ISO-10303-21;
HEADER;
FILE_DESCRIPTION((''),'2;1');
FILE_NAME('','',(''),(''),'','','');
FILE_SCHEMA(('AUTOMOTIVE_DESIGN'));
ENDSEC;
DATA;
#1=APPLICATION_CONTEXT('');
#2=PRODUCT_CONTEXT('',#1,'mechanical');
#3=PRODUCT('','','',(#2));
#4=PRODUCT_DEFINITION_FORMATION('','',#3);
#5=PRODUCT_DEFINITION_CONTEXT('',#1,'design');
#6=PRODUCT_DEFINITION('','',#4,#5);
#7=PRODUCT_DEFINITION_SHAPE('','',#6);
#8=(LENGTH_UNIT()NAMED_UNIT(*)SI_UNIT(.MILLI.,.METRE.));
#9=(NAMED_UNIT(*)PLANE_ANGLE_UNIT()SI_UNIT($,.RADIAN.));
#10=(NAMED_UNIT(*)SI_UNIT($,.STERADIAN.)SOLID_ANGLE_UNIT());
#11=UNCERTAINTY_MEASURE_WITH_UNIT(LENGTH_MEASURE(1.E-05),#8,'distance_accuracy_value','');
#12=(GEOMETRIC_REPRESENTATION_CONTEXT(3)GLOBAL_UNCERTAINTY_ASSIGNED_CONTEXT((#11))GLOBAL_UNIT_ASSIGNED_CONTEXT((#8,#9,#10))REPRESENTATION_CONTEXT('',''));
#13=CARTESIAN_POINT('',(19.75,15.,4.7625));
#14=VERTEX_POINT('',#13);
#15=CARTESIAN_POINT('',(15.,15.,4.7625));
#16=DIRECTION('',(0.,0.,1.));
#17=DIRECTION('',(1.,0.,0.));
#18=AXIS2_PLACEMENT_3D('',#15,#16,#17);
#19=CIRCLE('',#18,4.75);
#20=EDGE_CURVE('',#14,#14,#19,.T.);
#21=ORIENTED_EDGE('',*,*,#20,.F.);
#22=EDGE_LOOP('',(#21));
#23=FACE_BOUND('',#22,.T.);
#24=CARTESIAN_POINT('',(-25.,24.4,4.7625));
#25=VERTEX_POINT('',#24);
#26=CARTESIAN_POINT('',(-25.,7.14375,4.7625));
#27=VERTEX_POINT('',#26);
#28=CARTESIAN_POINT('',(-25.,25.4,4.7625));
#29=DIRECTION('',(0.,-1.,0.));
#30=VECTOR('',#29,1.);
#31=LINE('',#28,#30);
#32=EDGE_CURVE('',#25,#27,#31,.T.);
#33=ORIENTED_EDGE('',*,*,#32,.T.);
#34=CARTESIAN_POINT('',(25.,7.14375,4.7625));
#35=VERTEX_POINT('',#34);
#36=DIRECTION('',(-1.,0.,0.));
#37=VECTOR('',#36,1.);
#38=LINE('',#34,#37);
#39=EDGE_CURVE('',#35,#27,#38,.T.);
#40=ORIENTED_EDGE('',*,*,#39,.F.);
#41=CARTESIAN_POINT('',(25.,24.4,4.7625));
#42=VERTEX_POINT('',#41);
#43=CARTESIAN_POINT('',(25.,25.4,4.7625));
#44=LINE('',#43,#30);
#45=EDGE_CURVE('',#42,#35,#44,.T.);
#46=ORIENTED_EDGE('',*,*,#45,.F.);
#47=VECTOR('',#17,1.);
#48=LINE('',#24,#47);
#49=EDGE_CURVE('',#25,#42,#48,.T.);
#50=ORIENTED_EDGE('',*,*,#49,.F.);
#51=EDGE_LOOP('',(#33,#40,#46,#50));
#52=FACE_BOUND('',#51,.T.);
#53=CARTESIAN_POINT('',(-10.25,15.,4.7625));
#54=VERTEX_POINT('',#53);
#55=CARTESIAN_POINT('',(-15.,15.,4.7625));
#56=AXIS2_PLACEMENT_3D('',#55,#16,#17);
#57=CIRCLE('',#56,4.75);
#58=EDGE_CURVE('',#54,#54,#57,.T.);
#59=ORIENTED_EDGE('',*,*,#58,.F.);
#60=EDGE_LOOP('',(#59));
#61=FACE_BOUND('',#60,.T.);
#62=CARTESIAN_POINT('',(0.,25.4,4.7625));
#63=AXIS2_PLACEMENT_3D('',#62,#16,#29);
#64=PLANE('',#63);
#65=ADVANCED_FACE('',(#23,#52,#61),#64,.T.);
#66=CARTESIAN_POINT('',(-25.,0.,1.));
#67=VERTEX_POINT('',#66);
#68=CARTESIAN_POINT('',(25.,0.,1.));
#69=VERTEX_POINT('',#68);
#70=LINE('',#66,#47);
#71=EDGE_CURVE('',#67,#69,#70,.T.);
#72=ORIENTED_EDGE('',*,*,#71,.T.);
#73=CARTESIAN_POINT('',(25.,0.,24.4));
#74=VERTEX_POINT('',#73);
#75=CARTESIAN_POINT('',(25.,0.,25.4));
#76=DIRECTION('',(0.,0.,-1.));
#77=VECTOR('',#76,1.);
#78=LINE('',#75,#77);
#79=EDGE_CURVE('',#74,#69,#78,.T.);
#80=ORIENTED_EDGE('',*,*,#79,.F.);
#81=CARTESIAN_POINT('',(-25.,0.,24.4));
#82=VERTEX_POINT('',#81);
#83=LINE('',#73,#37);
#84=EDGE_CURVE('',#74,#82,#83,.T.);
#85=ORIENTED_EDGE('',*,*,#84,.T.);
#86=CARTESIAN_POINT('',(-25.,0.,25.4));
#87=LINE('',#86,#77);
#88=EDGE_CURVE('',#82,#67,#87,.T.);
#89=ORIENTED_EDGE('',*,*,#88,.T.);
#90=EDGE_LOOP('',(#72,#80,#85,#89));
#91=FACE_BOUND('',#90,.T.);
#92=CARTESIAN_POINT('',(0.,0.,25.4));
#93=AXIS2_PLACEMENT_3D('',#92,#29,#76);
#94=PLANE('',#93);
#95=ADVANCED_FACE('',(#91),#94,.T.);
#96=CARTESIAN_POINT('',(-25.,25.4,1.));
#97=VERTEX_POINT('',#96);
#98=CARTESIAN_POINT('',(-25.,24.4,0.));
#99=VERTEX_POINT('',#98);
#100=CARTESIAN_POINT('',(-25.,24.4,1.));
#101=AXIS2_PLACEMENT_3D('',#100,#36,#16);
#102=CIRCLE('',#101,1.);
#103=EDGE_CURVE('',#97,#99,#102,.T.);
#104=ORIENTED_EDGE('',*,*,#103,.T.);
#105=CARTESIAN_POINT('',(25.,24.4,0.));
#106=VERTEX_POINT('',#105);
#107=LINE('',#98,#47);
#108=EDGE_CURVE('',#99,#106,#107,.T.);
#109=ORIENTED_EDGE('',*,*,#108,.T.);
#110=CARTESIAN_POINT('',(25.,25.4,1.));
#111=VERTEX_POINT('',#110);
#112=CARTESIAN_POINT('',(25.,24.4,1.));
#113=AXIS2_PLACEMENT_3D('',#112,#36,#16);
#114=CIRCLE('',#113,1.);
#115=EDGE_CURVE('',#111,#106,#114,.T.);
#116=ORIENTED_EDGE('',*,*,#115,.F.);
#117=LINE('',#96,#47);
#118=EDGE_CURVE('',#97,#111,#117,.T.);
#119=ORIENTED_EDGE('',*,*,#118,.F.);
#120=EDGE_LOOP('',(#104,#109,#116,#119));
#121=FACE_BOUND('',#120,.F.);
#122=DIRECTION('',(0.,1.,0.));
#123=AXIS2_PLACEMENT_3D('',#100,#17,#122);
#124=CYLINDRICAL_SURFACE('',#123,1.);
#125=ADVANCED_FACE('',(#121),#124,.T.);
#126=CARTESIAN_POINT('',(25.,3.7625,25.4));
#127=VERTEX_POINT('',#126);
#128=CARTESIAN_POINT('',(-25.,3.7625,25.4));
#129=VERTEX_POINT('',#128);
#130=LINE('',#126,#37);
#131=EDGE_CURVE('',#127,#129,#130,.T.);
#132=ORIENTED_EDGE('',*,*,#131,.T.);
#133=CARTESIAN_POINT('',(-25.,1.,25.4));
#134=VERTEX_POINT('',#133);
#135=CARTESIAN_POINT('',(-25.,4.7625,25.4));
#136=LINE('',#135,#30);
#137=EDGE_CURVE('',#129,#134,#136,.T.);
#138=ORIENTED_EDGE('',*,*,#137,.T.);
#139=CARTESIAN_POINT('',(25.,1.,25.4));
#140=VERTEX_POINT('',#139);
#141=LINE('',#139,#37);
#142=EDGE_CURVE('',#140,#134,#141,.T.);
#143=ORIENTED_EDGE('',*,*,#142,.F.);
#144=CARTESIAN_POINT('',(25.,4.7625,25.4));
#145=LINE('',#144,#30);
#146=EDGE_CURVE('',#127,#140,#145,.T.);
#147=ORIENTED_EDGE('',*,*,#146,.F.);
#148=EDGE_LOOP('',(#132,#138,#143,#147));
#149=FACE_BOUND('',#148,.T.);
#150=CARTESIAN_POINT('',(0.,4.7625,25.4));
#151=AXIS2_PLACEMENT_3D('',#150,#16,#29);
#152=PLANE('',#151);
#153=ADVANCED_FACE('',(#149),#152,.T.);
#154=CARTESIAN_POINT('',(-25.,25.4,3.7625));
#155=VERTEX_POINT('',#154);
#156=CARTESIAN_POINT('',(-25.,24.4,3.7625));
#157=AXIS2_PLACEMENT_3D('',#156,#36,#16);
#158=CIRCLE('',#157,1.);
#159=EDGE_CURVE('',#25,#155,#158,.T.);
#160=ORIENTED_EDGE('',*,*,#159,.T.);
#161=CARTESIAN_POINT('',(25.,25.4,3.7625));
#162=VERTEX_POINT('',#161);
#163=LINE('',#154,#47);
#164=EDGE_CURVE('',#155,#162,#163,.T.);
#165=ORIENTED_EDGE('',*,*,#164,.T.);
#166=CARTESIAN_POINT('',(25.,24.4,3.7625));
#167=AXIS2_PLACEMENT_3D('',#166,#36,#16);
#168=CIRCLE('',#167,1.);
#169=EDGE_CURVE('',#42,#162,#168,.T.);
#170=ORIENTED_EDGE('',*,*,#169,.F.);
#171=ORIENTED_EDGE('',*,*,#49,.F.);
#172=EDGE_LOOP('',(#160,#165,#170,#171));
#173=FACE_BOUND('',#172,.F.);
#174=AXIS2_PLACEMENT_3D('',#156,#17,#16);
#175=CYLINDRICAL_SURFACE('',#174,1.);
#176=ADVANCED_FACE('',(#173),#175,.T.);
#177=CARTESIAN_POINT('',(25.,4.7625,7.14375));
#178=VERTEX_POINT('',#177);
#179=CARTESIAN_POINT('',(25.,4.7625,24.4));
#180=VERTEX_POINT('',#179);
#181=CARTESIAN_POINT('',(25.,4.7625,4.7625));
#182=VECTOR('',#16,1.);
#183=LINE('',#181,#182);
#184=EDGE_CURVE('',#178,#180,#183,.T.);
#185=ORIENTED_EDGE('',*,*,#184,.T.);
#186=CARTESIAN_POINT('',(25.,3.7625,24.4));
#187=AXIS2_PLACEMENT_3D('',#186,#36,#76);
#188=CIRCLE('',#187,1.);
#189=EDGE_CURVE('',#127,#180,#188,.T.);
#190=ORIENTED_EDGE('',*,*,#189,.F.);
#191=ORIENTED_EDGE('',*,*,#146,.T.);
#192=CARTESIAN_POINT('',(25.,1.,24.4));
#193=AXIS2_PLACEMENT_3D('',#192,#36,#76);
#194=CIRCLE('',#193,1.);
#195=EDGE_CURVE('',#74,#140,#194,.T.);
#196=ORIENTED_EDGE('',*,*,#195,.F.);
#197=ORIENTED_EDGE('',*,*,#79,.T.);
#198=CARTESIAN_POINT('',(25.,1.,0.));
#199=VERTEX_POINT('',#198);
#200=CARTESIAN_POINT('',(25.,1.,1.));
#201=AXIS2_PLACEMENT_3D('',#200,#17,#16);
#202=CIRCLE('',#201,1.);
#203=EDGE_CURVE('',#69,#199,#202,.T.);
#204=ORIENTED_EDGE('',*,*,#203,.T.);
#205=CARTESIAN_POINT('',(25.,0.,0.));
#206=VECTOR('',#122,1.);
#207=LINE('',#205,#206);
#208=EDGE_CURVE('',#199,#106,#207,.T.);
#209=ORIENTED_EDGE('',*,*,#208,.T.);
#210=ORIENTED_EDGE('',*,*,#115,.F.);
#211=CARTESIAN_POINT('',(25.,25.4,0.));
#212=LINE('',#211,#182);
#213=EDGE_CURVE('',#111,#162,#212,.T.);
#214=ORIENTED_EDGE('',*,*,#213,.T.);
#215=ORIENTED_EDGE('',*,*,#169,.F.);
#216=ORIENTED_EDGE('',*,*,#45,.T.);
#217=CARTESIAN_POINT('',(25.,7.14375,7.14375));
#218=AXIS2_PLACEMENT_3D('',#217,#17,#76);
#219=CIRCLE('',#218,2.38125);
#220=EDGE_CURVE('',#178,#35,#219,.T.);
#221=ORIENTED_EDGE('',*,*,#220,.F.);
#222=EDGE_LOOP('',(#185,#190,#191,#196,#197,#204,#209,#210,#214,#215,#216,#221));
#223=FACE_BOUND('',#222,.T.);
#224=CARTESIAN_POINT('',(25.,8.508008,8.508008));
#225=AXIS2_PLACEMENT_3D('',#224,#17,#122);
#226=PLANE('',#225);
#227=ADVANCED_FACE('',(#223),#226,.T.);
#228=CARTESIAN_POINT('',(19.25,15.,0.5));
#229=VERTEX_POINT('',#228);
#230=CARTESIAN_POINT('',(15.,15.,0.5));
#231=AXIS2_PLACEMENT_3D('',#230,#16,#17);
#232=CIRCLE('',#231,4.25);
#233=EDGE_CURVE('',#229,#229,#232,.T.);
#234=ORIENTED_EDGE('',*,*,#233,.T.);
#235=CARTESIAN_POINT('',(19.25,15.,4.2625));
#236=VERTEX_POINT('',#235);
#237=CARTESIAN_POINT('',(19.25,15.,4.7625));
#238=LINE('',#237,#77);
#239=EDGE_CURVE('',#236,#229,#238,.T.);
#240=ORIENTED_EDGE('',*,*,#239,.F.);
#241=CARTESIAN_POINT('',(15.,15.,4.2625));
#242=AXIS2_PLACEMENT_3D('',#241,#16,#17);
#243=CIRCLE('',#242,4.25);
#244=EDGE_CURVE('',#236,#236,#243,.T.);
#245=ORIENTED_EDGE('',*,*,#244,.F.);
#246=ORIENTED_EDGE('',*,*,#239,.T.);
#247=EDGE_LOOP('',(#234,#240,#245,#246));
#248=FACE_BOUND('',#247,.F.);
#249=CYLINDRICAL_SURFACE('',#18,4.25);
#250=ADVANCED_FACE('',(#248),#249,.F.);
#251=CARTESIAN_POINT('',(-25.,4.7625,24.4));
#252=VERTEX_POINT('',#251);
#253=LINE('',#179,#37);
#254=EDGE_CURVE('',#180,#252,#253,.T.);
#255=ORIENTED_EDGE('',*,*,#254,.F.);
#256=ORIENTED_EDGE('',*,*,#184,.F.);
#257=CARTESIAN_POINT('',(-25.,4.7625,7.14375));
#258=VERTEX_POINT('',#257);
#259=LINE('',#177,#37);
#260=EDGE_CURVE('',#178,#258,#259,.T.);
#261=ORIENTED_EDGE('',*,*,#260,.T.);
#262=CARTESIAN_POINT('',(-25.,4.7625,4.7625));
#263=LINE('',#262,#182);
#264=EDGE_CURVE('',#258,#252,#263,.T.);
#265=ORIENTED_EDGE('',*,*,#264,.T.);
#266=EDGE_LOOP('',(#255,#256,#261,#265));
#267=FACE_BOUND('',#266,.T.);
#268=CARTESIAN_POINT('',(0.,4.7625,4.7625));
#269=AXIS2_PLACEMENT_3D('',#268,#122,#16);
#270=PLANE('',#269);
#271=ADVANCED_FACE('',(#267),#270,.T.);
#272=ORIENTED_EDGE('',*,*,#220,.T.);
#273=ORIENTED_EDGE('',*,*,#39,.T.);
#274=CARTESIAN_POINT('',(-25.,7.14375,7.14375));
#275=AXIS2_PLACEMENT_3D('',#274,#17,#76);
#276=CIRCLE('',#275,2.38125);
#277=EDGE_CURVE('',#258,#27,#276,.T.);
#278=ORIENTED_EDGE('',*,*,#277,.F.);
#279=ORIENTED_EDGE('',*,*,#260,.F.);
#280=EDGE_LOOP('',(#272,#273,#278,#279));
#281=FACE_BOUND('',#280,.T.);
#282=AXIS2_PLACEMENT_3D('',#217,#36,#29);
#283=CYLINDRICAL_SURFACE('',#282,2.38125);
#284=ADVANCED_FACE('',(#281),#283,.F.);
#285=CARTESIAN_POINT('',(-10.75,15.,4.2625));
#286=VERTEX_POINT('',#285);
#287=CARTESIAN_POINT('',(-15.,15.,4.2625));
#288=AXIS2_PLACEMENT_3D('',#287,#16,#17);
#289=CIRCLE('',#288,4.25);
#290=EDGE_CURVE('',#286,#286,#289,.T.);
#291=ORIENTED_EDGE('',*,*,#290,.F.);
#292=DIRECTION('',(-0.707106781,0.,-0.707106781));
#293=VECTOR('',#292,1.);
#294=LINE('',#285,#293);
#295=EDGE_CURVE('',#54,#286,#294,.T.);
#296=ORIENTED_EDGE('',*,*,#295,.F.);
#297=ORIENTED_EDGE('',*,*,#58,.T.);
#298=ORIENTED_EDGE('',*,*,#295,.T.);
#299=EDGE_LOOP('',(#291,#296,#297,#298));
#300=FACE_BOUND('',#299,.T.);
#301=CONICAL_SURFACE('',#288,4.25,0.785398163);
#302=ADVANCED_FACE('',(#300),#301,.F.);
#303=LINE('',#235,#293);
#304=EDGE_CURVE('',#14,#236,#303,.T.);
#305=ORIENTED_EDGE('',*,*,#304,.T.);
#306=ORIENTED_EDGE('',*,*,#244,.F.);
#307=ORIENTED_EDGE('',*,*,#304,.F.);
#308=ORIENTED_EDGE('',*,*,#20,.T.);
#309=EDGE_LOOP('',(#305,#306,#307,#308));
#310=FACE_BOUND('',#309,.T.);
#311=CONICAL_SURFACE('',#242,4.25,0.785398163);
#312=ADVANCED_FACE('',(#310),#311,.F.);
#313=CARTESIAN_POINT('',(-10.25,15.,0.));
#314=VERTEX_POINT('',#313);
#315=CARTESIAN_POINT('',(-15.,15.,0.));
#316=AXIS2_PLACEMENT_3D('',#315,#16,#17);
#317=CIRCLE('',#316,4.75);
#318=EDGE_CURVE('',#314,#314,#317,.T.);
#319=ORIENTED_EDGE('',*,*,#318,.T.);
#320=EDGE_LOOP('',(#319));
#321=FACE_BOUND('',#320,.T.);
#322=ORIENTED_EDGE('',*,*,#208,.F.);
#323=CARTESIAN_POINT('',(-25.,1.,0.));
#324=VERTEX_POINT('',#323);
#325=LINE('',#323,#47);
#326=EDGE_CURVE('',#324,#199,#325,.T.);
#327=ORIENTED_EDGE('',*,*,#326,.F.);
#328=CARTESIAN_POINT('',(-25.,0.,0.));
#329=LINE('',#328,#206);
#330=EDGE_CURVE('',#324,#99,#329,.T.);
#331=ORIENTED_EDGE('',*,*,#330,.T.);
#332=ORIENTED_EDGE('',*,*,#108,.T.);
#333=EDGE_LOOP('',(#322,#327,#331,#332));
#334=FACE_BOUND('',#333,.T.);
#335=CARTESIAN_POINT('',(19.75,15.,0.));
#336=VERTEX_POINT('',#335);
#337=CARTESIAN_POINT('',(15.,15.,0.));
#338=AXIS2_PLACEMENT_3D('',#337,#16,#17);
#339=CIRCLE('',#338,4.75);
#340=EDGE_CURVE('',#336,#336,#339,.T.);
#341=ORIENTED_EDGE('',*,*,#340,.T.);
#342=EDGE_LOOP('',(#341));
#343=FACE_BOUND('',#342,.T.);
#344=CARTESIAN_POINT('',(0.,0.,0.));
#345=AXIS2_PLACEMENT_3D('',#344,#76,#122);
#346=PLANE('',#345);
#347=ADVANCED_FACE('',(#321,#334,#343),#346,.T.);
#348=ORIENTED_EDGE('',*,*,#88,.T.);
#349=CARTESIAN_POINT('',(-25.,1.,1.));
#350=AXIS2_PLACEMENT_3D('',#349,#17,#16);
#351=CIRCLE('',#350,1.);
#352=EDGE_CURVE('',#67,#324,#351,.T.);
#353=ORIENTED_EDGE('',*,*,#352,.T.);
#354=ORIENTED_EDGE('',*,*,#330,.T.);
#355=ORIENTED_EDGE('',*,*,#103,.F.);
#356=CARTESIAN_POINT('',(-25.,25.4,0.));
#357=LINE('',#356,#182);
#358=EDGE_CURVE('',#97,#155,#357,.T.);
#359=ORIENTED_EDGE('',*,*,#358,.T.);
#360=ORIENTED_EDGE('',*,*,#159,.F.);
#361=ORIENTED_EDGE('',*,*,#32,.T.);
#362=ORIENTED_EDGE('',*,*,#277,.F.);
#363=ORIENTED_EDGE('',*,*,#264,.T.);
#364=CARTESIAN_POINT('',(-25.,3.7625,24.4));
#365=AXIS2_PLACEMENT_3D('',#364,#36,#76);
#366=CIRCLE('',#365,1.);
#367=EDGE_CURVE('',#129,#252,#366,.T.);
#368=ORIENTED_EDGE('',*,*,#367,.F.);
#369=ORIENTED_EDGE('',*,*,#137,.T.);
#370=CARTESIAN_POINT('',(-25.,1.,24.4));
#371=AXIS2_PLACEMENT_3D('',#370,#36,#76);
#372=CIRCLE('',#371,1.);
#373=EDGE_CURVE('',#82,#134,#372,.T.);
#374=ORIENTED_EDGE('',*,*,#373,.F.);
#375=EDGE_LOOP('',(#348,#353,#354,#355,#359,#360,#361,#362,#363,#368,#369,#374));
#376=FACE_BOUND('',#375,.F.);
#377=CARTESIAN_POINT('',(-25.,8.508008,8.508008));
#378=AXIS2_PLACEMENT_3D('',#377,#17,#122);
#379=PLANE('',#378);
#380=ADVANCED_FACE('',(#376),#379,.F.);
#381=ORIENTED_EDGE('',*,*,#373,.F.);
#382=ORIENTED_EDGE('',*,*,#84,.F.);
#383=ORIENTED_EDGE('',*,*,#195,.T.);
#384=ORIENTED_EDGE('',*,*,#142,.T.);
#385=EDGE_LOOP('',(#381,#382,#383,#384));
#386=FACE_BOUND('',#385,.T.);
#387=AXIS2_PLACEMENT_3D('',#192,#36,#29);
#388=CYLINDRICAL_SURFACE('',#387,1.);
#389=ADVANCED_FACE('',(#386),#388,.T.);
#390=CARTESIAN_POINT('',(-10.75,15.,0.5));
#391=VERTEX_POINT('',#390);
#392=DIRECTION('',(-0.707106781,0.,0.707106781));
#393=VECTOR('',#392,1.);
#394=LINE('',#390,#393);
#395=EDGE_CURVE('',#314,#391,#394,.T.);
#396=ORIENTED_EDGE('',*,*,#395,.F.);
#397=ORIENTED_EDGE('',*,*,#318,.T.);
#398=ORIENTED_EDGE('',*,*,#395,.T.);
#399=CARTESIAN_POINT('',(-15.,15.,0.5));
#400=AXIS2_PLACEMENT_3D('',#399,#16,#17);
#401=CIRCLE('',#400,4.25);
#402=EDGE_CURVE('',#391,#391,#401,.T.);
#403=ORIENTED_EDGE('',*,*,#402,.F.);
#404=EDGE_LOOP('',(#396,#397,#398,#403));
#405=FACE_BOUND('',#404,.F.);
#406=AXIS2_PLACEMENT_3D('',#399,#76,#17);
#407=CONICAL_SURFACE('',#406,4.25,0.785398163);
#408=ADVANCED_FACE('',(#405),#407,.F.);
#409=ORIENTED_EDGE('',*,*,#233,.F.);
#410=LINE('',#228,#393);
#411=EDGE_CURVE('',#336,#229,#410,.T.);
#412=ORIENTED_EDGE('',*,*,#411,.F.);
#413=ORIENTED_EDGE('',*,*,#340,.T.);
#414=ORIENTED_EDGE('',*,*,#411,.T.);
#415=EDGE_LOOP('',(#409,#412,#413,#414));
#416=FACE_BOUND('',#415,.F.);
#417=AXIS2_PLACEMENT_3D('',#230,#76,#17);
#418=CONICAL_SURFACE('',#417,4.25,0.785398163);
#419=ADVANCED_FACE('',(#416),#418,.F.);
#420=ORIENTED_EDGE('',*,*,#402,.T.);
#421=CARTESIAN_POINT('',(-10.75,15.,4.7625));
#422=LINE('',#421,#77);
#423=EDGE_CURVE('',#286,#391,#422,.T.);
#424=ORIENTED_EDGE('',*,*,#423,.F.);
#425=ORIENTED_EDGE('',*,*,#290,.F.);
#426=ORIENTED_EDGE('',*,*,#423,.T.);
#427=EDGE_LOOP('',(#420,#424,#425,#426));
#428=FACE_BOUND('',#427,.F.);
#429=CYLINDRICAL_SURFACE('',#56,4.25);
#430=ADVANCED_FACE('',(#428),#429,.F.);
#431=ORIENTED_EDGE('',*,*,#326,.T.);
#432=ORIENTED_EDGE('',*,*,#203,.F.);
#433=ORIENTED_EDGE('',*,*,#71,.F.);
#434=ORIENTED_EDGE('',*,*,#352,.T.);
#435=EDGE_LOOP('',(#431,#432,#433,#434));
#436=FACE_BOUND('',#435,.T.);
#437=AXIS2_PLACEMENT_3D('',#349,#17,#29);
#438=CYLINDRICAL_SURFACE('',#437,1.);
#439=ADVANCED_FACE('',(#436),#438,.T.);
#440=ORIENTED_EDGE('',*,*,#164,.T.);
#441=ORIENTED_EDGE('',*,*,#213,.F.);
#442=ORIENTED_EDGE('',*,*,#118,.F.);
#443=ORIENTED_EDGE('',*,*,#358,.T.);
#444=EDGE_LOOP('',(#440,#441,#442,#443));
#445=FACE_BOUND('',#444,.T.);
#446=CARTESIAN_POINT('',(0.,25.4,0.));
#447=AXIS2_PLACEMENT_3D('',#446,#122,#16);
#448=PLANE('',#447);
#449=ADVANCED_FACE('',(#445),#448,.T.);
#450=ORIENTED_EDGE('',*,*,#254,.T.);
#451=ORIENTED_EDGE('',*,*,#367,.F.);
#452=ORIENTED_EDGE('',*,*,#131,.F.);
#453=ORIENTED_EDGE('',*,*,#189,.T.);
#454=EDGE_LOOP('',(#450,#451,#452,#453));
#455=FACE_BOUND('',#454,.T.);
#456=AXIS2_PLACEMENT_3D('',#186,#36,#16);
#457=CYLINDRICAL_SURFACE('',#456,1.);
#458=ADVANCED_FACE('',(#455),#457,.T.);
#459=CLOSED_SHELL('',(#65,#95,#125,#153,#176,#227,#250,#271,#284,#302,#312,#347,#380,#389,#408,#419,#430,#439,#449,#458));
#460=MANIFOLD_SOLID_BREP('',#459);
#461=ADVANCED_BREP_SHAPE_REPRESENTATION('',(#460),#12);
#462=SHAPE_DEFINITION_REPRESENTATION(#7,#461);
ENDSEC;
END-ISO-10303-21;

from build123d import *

# Parameters (mm, degrees)
F1_DEPTH = 25
F2_R     = 1
F3_R     = 2.38125
F4_R     = 4.25
F5_DEPTH = 25
F6_SIZE  = 0.5
F7_R     = 2.5
F8_DEPTH = 25


with BuildPart() as f1:
    # F0 (on Right) → F1 (new body, symmetric)
    with BuildSketch(Plane.YZ):
        Polygon((0, 25.4), (0, 0), (25.4, 0), (25.4, 4.7625), (4.7625, 4.7625), (4.7625, 25.4), align=None)
    extrude(amount=F1_DEPTH, both=True)

    # F2
    f2_edges = [f1.edges().sort_by_distance(p)[0] for p in [
        (0, 0, 25.4),
        (0, 4.7625, 25.4),
        (0, 0, 0),
        (0, 25.4, 4.7625),
        (0, 25.4, 0),
    ]]
    fillet(f2_edges, radius=F2_R)

    # F3
    f3_edges = [f1.edges().sort_by_distance(p)[0] for p in [
        (0, 4.7625, 4.7625),
    ]]
    fillet(f3_edges, radius=F3_R)

    # F4 (on face) → F5 (cut)
    with BuildSketch(Plane.XY.offset(4.7625)):
        with Locations((-15, 15)):
            Circle(F4_R)
        with Locations((715, 15)):
            Circle(F4_R)
        with Locations((1445, 15)):
            Circle(F4_R)
        with Locations((15, 15)):
            Circle(F4_R)
    extrude(amount=-F5_DEPTH, mode=Mode.SUBTRACT)

    # F6
    f6_edges = [f1.edges().sort_by_distance(p)[0] for p in [
        (-19.25, 15, 4.7625),
        (-10.75, 15, 2.38125),
        (-19.25, 15, 0),
        (10.75, 15, 4.7625),
        (19.25, 15, 2.38125),
        (10.75, 15, 0),
    ]]
    chamfer(f6_edges, length=F6_SIZE)

    # F7 (on face) → F8 (cut)
    with BuildSketch(Plane.XZ):
        with Locations((65, 20)):
            Circle(F7_R)
        with Locations((-65, 20)):
            Circle(F7_R)
    extrude(amount=-F8_DEPTH, mode=Mode.SUBTRACT)


solid = f1.part
